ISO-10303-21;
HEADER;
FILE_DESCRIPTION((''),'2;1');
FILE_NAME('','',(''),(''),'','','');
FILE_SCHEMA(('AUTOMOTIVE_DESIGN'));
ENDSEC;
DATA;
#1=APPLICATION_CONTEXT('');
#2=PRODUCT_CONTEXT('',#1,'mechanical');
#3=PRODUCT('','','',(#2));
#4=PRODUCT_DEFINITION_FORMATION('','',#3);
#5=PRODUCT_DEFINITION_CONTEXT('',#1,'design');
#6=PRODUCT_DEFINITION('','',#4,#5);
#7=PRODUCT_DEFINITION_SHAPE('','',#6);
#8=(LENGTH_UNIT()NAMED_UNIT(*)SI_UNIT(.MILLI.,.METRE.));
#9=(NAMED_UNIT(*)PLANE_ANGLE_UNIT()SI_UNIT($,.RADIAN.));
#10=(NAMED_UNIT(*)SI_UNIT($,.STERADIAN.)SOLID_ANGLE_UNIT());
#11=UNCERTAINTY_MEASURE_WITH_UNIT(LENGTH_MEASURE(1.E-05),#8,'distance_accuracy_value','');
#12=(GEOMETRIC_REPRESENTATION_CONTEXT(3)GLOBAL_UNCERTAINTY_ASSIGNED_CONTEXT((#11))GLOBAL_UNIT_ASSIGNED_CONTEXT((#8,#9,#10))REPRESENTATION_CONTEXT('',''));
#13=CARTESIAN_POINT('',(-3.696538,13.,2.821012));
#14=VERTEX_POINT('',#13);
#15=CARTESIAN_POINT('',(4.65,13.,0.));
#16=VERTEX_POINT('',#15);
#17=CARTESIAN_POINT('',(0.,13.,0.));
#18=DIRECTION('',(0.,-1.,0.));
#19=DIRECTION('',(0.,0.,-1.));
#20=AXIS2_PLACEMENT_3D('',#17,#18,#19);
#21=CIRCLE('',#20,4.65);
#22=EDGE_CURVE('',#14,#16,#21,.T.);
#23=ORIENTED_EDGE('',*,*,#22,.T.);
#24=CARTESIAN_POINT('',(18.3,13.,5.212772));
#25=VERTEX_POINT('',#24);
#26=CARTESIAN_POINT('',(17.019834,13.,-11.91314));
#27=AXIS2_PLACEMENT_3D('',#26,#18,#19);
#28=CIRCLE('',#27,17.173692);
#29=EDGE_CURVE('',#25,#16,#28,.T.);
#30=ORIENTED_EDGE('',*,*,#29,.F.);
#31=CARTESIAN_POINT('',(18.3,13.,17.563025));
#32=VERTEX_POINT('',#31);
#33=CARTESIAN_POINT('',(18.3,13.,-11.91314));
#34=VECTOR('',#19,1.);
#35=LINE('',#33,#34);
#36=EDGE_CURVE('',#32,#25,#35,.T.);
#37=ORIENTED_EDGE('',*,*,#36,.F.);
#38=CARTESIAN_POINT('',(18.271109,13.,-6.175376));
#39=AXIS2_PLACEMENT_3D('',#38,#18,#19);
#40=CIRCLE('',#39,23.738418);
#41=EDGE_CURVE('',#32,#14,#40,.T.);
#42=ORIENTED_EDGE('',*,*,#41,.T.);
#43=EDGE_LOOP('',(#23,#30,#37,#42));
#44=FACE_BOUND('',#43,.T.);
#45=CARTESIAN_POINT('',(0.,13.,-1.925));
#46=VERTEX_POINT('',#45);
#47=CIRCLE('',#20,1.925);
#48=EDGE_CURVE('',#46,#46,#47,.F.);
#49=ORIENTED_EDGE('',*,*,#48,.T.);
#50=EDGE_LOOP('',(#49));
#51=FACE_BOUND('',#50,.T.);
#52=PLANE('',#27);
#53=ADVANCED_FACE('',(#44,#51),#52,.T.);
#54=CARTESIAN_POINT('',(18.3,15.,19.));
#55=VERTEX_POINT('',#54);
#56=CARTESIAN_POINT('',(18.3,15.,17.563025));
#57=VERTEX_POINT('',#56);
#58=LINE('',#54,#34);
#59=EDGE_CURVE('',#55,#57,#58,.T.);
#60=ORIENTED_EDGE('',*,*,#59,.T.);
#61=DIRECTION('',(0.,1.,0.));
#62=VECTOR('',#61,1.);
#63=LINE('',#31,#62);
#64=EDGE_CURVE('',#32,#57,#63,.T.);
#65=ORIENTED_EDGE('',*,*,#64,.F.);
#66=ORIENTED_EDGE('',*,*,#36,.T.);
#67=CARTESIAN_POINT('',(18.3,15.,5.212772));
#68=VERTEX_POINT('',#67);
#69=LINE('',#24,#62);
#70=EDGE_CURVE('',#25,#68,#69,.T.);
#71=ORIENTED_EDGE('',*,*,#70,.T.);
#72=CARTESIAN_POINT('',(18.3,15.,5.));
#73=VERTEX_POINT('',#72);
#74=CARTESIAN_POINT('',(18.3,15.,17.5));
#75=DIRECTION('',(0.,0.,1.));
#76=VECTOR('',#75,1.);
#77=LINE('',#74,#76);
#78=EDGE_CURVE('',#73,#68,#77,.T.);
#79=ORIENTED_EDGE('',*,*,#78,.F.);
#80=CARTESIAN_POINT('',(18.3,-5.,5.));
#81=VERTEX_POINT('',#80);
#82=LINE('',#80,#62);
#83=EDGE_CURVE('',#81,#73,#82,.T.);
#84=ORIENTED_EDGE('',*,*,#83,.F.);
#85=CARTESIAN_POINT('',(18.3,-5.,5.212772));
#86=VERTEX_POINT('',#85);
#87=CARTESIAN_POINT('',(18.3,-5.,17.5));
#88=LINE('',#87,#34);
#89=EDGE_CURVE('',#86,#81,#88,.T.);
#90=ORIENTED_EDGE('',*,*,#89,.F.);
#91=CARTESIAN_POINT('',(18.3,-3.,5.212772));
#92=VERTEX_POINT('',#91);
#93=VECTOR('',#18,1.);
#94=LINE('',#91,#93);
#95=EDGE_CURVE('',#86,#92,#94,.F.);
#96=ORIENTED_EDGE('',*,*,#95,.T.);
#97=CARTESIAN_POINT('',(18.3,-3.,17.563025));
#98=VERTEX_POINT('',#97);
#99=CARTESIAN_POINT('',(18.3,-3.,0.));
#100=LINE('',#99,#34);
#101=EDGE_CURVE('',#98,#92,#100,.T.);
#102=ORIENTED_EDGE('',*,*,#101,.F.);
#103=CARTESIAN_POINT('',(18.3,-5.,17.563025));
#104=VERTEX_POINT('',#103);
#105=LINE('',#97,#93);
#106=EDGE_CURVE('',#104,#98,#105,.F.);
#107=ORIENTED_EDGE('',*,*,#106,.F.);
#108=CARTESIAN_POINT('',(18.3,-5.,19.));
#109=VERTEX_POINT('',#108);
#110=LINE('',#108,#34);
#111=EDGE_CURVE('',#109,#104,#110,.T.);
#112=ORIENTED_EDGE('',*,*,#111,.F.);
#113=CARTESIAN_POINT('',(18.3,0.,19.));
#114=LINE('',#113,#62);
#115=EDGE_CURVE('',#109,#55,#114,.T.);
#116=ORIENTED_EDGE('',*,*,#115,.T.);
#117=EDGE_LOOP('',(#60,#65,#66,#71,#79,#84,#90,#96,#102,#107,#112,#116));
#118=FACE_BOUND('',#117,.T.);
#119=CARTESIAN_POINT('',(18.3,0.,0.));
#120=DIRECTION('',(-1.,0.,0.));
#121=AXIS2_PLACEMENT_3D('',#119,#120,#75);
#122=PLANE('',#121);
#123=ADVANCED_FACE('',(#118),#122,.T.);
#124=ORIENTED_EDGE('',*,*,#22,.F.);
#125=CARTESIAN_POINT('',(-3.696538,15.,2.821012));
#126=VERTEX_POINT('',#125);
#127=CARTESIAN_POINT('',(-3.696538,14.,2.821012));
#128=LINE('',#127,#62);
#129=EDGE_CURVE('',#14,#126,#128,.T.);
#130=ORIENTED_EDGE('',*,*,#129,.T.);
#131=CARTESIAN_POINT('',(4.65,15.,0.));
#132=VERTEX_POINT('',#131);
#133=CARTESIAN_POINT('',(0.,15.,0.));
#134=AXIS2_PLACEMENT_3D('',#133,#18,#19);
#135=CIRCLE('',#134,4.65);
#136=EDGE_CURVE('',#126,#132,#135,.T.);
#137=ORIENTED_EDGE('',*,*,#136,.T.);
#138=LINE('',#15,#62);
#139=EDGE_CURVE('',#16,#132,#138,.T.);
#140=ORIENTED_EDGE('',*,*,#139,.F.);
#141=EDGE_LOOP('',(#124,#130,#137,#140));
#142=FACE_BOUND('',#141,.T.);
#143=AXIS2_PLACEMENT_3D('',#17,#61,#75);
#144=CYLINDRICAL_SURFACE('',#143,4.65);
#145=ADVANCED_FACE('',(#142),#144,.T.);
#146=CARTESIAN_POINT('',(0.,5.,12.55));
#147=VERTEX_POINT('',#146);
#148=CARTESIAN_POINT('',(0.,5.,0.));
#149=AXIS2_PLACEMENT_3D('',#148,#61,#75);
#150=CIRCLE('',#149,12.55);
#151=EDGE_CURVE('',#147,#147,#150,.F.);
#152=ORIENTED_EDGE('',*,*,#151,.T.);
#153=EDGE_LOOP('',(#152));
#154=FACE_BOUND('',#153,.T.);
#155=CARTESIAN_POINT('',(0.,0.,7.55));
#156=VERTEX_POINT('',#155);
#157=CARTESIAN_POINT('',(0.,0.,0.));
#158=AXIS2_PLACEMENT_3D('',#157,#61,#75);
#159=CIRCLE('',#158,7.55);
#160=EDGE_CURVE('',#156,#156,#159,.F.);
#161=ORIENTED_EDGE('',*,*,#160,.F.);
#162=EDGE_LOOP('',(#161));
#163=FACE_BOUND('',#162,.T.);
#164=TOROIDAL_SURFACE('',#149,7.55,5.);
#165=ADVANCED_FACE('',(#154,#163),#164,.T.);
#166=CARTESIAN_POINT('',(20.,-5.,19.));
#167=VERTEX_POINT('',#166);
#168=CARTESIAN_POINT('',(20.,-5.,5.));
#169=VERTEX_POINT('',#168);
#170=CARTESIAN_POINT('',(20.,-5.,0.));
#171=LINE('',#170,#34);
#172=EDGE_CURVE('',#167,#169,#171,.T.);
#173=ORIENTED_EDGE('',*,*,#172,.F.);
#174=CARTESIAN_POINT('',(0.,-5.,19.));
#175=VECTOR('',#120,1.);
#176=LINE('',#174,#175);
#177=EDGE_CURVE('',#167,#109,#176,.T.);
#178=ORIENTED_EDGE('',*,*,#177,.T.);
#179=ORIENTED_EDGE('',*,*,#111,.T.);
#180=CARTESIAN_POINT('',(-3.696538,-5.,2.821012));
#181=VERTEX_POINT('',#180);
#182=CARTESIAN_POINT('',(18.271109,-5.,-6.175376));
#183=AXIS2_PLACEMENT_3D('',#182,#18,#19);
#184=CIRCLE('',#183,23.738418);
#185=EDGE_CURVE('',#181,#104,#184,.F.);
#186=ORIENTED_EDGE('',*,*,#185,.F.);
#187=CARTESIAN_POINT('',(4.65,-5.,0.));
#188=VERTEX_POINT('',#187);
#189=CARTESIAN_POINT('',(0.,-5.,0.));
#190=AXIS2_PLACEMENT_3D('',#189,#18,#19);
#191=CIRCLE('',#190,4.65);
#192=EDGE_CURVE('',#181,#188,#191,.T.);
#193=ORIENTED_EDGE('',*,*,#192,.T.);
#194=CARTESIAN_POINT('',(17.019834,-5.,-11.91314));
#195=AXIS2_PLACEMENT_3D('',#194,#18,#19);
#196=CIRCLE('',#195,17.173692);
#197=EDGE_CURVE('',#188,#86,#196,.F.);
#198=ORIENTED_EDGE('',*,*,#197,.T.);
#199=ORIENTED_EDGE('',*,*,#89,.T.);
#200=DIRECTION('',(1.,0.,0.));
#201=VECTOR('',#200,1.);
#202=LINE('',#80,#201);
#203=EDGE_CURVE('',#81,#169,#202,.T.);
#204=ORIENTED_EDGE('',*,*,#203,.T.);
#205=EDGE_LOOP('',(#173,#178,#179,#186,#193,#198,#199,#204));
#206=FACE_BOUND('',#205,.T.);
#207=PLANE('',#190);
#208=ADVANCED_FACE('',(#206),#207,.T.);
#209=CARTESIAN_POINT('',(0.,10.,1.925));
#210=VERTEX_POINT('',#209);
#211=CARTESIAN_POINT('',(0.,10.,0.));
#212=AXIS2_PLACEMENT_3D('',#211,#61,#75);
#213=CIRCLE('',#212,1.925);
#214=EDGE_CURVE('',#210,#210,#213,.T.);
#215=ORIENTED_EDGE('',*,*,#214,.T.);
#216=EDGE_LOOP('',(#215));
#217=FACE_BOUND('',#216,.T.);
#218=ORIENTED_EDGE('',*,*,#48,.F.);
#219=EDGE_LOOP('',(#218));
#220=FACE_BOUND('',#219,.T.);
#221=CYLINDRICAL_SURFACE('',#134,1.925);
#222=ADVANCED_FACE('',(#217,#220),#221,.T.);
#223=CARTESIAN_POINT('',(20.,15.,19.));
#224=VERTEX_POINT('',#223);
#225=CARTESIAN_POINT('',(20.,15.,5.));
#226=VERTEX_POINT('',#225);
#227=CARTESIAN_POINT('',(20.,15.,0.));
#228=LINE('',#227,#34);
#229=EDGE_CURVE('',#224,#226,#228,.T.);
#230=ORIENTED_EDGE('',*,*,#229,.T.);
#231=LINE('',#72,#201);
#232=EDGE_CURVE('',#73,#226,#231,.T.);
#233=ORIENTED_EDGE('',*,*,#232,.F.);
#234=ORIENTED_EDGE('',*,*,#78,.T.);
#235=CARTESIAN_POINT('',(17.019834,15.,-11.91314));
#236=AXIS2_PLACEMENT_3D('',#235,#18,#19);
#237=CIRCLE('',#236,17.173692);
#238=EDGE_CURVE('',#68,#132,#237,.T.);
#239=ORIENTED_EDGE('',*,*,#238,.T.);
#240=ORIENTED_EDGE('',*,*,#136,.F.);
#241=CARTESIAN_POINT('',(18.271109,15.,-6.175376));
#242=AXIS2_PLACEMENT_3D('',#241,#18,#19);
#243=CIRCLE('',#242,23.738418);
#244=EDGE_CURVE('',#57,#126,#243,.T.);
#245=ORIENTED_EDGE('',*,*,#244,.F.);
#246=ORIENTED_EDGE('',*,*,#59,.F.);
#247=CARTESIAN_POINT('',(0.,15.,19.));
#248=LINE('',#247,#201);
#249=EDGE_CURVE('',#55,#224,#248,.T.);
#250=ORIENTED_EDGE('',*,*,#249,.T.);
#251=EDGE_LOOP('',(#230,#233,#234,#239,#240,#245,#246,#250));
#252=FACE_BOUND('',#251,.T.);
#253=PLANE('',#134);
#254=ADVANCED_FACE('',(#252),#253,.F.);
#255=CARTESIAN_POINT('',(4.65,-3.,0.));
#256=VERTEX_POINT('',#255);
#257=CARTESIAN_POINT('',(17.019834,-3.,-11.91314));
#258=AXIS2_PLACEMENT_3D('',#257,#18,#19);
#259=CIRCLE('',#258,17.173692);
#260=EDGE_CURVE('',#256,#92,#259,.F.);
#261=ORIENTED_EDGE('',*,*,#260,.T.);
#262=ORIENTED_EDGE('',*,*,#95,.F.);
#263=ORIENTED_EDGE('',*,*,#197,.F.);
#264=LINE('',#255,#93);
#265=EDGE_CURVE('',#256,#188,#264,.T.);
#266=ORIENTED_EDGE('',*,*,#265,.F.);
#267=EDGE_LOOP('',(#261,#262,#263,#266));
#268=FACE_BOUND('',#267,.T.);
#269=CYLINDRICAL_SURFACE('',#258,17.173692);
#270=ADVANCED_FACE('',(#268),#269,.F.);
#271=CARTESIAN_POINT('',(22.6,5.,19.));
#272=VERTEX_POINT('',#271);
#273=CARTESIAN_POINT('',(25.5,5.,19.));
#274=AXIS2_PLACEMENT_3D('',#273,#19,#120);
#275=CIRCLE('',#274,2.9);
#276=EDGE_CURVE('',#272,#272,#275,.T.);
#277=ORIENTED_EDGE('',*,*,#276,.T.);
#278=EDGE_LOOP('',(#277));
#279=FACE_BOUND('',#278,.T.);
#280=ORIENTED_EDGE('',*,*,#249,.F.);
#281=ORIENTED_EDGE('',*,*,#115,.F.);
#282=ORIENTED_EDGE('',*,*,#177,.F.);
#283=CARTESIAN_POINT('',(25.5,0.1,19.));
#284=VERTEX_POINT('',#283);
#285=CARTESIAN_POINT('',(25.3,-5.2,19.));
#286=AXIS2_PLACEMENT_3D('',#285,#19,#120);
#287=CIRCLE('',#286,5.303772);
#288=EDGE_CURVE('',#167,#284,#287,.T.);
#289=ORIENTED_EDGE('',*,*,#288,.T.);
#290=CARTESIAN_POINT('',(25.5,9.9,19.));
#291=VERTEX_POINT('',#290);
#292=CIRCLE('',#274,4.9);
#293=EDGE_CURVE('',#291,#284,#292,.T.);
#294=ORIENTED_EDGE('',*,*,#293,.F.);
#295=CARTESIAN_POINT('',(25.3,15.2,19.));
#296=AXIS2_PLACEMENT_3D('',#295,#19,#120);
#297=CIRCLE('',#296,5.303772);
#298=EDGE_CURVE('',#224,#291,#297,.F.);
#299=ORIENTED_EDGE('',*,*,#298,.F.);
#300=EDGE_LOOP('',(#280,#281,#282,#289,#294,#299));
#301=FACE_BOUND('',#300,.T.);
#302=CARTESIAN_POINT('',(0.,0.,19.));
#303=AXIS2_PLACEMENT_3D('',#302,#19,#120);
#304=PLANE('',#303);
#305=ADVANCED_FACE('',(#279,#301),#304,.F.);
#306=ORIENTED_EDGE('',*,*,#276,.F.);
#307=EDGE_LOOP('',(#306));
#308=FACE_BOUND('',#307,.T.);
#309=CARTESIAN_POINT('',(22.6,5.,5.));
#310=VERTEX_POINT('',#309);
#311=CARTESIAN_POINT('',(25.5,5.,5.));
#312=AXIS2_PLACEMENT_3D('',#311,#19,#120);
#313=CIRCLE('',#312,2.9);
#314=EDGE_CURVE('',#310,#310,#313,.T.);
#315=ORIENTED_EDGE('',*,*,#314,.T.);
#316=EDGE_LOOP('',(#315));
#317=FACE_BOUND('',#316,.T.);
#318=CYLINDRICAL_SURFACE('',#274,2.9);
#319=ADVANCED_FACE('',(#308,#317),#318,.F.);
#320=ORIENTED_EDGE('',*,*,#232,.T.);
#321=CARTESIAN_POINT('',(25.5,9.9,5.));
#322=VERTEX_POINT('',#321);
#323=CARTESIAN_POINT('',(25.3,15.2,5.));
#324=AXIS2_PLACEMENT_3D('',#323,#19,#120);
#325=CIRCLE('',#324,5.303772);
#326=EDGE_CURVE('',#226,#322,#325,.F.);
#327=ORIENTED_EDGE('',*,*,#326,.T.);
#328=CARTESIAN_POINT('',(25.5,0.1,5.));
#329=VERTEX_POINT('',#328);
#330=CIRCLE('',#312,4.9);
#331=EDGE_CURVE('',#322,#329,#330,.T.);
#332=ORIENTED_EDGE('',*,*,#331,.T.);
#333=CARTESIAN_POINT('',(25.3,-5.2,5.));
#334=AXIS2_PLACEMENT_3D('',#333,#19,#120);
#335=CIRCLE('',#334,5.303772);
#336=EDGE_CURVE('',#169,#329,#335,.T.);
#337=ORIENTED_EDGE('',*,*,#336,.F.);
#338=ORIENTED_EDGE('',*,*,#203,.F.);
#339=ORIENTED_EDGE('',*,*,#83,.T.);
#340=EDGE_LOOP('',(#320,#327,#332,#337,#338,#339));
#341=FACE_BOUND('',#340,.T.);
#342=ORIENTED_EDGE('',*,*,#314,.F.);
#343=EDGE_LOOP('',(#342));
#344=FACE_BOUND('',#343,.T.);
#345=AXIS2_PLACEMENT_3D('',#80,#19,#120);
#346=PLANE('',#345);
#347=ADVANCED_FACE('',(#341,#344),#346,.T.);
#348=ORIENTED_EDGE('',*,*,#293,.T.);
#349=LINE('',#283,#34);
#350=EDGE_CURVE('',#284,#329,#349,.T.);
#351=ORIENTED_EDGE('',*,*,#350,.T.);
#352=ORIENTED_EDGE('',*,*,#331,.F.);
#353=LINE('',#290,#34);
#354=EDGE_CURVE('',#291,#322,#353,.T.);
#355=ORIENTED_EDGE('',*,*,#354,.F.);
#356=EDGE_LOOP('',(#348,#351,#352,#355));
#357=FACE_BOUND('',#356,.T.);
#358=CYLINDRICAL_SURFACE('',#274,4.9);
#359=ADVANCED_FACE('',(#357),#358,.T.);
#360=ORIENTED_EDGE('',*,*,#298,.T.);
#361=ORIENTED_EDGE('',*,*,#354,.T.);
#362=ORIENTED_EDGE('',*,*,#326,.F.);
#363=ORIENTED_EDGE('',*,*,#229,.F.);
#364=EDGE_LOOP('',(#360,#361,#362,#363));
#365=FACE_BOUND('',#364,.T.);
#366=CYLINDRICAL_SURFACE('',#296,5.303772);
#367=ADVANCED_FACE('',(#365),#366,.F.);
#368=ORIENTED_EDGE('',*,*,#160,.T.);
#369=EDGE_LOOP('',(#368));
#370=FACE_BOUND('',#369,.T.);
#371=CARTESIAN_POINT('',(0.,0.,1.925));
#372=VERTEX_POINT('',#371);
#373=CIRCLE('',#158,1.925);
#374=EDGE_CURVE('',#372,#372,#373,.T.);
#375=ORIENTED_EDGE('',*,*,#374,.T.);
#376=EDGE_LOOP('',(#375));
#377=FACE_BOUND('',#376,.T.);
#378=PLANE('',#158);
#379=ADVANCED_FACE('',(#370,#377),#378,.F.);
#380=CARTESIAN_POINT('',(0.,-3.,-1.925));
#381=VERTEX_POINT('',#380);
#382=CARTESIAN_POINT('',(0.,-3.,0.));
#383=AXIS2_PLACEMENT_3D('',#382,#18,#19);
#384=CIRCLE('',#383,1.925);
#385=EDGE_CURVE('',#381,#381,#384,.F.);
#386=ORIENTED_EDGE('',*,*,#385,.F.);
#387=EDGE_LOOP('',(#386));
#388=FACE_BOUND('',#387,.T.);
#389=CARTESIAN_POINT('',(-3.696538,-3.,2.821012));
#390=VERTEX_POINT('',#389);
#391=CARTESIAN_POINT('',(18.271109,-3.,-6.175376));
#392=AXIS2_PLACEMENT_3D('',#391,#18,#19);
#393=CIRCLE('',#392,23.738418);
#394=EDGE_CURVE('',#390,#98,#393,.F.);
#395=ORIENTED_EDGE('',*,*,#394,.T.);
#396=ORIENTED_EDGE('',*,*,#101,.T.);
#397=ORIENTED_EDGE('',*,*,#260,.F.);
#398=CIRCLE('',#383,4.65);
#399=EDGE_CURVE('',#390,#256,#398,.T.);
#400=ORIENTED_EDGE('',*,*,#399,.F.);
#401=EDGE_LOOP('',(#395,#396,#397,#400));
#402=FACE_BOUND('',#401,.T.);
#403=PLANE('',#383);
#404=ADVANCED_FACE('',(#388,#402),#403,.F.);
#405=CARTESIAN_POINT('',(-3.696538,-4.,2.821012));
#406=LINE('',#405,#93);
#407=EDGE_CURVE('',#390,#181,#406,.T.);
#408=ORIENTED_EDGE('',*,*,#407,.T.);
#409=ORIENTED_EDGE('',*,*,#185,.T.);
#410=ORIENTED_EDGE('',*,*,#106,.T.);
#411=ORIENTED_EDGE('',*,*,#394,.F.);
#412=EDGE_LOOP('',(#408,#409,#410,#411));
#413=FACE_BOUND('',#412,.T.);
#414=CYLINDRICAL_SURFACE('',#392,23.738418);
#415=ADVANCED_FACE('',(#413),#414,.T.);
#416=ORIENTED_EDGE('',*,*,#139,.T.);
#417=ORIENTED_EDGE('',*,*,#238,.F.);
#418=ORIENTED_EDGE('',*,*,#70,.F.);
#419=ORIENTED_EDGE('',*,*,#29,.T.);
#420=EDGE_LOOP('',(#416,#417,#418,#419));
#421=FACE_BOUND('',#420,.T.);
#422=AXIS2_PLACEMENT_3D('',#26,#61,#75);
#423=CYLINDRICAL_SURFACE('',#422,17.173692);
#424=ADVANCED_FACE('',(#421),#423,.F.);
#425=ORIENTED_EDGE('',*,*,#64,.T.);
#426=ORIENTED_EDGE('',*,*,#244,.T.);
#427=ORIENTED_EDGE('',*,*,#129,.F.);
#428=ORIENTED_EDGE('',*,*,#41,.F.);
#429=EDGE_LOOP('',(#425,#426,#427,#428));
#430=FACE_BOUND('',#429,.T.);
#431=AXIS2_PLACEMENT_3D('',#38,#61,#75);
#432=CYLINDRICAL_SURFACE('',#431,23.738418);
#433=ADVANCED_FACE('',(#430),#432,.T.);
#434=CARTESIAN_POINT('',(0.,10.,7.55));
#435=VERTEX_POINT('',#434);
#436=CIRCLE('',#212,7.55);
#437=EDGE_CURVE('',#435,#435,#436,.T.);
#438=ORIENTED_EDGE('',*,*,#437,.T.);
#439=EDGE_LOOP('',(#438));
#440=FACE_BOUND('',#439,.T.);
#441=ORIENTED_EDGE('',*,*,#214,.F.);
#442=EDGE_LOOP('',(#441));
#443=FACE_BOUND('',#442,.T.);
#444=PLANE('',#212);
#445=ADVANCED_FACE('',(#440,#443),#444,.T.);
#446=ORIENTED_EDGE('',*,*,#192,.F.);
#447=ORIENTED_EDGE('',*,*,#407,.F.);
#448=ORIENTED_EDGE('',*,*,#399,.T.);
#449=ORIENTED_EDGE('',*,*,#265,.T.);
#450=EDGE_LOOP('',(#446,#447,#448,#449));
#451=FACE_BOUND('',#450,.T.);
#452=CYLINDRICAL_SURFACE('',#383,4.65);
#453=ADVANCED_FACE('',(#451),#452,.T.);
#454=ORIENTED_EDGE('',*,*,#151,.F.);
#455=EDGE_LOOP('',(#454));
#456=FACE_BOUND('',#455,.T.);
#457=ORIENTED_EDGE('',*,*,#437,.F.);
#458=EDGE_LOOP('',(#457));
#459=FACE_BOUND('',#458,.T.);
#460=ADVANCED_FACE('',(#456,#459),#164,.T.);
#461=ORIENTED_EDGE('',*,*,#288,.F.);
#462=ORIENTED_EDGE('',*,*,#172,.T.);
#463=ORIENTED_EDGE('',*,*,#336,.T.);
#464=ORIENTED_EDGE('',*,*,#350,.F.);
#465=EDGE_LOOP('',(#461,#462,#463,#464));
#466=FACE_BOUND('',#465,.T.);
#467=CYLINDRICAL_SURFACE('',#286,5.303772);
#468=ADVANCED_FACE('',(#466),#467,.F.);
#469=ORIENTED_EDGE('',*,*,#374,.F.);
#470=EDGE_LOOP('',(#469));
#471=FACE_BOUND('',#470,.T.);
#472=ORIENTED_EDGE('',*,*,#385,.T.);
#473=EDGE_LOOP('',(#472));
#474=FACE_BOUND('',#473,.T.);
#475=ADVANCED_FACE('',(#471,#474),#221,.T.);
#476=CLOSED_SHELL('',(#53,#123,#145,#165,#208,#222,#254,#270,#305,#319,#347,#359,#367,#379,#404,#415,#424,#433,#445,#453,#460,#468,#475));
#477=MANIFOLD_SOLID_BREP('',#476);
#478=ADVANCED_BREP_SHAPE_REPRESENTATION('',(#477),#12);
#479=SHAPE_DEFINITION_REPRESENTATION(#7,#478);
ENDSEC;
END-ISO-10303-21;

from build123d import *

# Parameters (mm, degrees)
SKETCH1_R                = 12.55
SKETCH1_R_2              = 1.925
BOSS_EXTRUDE1_DEPTH      = 10
FILLET1_R                = 5
BOSS_EXTRUDE2_DEPTH      = 5
BOSS_EXTRUDE2_DEPTH_BACK = 15
SKETCH2_R                = 1.925
SKETCH3_R                = 1.925
BOSS_EXTRUDE3_DEPTH      = 2
BOSS_EXTRUDE4_START      = -20
BOSS_EXTRUDE4_OUTLINE_R  = 1.925
BOSS_EXTRUDE4_DEPTH      = 2
SKETCH4_W                = 12.5
SKETCH4_H                = 20
BOSS_EXTRUDE5_DEPTH      = 1.7
SKETCH5_W                = 1.7
SKETCH5_H                = 10
BOSS_EXTRUDE6_DEPTH      = 14


# Read off the part's stored shape, not the designer's step: Boss-Extrude4
with BuildPart() as part:
    # Sketch1 → Boss-Extrude1 (new body)
    with BuildSketch(Plane(origin=(0, 0, 0), x_dir=(1, 0, 0), z_dir=(0, 1, 0))):
        with Locations(Location((0, 0, 0), (0, 0, 270))):
            Circle(SKETCH1_R)
        with Locations(Location((0, 0, 0), (0, 0, 270))):
            Circle(SKETCH1_R_2, mode=Mode.SUBTRACT)
    extrude(amount=BOSS_EXTRUDE1_DEPTH)

    # Fillet1
    fillet1_edges = [part.edges().sort_by_distance(p)[0] for p in [
        (0, 0, -12.55),
        (0, 10, -12.55),
    ]]
    fillet(fillet1_edges, radius=FILLET1_R - 0.0001)  # a hair under: the kernel refuses the full size

    # Sketch2 → Boss-Extrude2 (add, two sides: drawn at the far end of the back side and taken through both)
    with BuildSketch(Plane.XZ.offset(-BOSS_EXTRUDE2_DEPTH_BACK)):
        with Locations(Location((0, 0, 0), (0, 0, 270))):
            Circle(SKETCH2_R)
    extrude(amount=BOSS_EXTRUDE2_DEPTH + BOSS_EXTRUDE2_DEPTH_BACK)

    # Sketch3 → Boss-Extrude3 (add)
    with BuildSketch(Plane.XZ.offset(5)):
        with BuildLine():
            Line((20, 5), (20, 17.5))
            ThreePointArc((20, 17.5), (5.770309443, 14.004874621), (-3.696538076, 2.821011566))
            ThreePointArc((-3.696538076, 2.821011566), (-1.488891861, -4.405190237), (4.65, 0))
            ThreePointArc((4.65, 0), (11.70086168, 4.416104641), (20, 5))
        make_face()
        with Locations(Location((0, 0, 0), (0, 0, 270))):
            Circle(SKETCH3_R, mode=Mode.SUBTRACT)
    extrude(amount=-BOSS_EXTRUDE3_DEPTH)

    # Boss-Extrude4 outline → Boss-Extrude4 (add)
    with BuildSketch(Plane.XZ.offset(5).offset(BOSS_EXTRUDE4_START)):
        with BuildLine():
            ThreePointArc((-3.696538076, 2.821011566), (-1.488891861, -4.405190237), (4.65, 0))
            ThreePointArc((4.65, 0), (11.70086168, 4.416104641), (20, 5))
            Line((20, 5), (20, 17.5))
            ThreePointArc((20, 17.5), (5.770309443, 14.004874621), (-3.696538076, 2.821011566))
        make_face()
        Circle(BOSS_EXTRUDE4_OUTLINE_R, mode=Mode.SUBTRACT)
    extrude(amount=BOSS_EXTRUDE4_DEPTH)

    # Sketch4 → Boss-Extrude5 (add)
    with BuildSketch(Plane(origin=(20, 0, 0), x_dir=(0, 0, -1), z_dir=(1, 0, 0))):
        with Locations((-11.25, 5)):
            Rectangle(SKETCH4_W, SKETCH4_H)
    extrude(amount=-BOSS_EXTRUDE5_DEPTH)

    # Sketch5 → Boss-Extrude6 (add)
    with BuildSketch(Plane(origin=(0, 0, 5), x_dir=(-1, 0, 0), z_dir=(0, 0, -1))):
        with BuildLine():
            ThreePointArc((-25.307916987, 9.896233666), (-21.967917982, 8.39623271), (-20.6, 5))
            Line((-20.6, 5), (-20, 5))
            Line((-20, 5), (-20, 15))
            ThreePointArc((-20, 15), (-21.62390923, 11.376865599), (-25.307916987, 9.896233666))
        make_face()
        with BuildLine():
            Line((-20, 5), (-20.6, 5))
            ThreePointArc((-20.6, 5), (-21.967917982, 1.60376729), (-25.307916987, 0.103766334))
            ThreePointArc((-25.307916987, 0.103766334), (-21.62390923, -1.376865599), (-20, -5))
            Line((-20, -5), (-20, 5))
        make_face()
        with BuildLine():
            ThreePointArc((-25.307916987, 0.103766334), (-21.967917982, 1.60376729), (-20.6, 5))
            Line((-20.6, 5), (-22.6, 5))
            ThreePointArc((-22.6, 5), (-25.5, 2.1), (-28.4, 5))
            Line((-28.4, 5), (-30.4, 5))
            ThreePointArc((-30.4, 5), (-28.964823228, 1.535176772), (-25.5, 0.1))
            ThreePointArc((-25.5, 0.1), (-25.403975548, 0.102752972), (-25.307916987, 0.103766334))
        make_face()
        with BuildLine():
            Line((-22.6, 5), (-20.6, 5))
            ThreePointArc((-20.6, 5), (-21.967917982, 8.39623271), (-25.307916987, 9.896233666))
            ThreePointArc((-25.307916987, 9.896233666), (-25.403975548, 9.897247028), (-25.5, 9.9))
            ThreePointArc((-25.5, 9.9), (-28.964823228, 8.464823228), (-30.4, 5))
            Line((-30.4, 5), (-28.4, 5))
            ThreePointArc((-28.4, 5), (-25.5, 7.9), (-22.6, 5))
        make_face()
        with Locations((-19.15, 0)):
            Rectangle(SKETCH5_W, SKETCH5_H)
        with Locations((-19.15, 10)):
            Rectangle(SKETCH5_W, SKETCH5_H)
    extrude(amount=-BOSS_EXTRUDE6_DEPTH)


solid = part.part
